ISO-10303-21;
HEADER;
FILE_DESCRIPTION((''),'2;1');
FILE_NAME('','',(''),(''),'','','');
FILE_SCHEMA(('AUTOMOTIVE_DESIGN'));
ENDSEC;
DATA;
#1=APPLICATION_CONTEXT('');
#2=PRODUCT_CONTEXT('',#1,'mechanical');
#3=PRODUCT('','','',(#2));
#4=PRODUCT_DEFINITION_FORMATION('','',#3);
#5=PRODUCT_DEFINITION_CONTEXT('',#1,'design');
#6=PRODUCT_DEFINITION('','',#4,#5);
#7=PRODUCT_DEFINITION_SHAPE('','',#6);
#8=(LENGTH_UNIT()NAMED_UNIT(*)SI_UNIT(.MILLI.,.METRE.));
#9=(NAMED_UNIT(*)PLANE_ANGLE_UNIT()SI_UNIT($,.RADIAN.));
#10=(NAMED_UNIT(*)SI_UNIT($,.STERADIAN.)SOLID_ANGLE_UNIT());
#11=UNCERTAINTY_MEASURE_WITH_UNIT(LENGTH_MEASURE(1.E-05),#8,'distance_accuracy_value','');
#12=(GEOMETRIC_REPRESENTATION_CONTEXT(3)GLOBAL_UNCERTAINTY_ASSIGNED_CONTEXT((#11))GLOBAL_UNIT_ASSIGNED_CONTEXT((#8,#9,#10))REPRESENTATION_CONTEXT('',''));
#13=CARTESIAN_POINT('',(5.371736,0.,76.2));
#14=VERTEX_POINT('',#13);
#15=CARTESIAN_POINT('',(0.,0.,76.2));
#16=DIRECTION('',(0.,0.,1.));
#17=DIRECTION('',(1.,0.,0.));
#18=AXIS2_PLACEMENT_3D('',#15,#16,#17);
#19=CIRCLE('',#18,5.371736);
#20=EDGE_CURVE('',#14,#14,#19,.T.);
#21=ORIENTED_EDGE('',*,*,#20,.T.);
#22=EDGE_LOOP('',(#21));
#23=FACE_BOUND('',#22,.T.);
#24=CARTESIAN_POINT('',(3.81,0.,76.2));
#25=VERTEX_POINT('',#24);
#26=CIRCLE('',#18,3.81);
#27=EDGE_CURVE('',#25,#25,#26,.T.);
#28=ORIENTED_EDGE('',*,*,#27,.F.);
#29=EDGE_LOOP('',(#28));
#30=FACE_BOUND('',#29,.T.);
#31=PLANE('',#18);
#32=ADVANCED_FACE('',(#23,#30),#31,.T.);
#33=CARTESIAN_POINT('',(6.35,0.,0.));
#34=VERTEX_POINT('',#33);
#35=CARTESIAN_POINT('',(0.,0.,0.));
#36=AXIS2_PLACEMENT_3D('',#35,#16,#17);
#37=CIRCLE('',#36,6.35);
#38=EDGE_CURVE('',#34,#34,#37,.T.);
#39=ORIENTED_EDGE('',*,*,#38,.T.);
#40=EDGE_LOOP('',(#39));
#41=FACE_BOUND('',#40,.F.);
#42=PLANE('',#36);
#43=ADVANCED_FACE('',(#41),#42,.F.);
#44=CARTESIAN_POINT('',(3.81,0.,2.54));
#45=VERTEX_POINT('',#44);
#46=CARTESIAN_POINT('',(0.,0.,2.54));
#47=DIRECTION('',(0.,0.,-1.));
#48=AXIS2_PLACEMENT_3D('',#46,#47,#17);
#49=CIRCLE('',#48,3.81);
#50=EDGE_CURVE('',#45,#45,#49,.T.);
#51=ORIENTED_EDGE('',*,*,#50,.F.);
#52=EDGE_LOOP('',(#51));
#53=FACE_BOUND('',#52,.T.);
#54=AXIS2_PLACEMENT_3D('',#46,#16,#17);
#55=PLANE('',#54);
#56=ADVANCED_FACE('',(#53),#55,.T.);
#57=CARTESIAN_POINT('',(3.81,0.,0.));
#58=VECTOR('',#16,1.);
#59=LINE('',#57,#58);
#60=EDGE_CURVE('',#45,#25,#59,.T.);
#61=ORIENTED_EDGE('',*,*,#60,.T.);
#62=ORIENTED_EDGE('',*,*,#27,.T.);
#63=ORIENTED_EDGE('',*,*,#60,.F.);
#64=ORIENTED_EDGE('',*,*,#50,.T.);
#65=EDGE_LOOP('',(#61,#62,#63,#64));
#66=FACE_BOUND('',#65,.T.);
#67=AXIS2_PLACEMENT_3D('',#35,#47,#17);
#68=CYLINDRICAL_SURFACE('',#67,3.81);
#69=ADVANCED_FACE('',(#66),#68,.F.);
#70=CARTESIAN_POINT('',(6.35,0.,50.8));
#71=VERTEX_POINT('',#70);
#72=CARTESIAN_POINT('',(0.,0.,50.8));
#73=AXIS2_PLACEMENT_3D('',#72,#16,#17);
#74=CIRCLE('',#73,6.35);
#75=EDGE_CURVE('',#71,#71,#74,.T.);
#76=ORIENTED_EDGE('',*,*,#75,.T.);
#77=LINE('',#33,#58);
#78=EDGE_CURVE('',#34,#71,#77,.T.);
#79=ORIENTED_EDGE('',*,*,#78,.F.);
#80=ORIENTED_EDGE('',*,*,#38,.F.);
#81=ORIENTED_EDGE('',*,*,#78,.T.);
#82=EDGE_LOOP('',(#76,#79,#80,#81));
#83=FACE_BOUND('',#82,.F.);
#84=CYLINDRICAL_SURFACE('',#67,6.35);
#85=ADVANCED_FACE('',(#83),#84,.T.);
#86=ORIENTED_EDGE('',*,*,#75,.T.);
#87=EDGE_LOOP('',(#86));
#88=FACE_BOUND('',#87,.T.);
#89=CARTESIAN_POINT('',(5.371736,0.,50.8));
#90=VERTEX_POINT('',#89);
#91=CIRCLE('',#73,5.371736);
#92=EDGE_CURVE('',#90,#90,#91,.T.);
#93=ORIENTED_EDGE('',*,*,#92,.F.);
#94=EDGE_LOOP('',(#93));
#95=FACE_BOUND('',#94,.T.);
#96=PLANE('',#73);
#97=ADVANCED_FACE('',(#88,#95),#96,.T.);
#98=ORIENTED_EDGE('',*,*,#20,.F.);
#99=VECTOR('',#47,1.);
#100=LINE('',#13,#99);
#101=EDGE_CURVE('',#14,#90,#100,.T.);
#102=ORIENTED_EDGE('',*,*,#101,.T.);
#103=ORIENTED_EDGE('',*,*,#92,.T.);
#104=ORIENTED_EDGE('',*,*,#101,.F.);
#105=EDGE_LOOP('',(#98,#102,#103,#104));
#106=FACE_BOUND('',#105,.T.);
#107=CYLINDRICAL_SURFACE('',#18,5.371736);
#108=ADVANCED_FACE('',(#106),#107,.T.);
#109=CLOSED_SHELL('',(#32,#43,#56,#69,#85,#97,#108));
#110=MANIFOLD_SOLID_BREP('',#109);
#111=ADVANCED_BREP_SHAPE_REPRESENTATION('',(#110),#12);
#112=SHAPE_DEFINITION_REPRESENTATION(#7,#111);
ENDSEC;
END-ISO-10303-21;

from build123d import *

# Parameters (mm, degrees)
F0_R     = 6.35
F1_DEPTH = 76.2
F2_T     = -2.54
F5_R     = 6.35
F5_R_2   = 5.3717360651
F6_DEPTH = 25.4


# Not quite as in the source:
# - the program builds the solid bodies; features that only make, move or delete a surface that nothing else refers to are left out


with BuildPart() as f1:
    # F0 (on Top) → F1 (new body)
    with BuildSketch(Plane.XY):
        Circle(F0_R)
    extrude(amount=F1_DEPTH)

    # F2
    f2_openings = [f1.faces().sort_by_distance(p)[0] for p in [
        (0, 0, 76.2),
    ]]
    offset(amount=F2_T, openings=f2_openings)

    # F5 (on face) → F6 (cut)
    with BuildSketch(Plane.XY.offset(76.2)):
        Circle(F5_R)
        Circle(F5_R_2, mode=Mode.SUBTRACT)
    extrude(amount=-F6_DEPTH, mode=Mode.SUBTRACT)


solid = f1.part
